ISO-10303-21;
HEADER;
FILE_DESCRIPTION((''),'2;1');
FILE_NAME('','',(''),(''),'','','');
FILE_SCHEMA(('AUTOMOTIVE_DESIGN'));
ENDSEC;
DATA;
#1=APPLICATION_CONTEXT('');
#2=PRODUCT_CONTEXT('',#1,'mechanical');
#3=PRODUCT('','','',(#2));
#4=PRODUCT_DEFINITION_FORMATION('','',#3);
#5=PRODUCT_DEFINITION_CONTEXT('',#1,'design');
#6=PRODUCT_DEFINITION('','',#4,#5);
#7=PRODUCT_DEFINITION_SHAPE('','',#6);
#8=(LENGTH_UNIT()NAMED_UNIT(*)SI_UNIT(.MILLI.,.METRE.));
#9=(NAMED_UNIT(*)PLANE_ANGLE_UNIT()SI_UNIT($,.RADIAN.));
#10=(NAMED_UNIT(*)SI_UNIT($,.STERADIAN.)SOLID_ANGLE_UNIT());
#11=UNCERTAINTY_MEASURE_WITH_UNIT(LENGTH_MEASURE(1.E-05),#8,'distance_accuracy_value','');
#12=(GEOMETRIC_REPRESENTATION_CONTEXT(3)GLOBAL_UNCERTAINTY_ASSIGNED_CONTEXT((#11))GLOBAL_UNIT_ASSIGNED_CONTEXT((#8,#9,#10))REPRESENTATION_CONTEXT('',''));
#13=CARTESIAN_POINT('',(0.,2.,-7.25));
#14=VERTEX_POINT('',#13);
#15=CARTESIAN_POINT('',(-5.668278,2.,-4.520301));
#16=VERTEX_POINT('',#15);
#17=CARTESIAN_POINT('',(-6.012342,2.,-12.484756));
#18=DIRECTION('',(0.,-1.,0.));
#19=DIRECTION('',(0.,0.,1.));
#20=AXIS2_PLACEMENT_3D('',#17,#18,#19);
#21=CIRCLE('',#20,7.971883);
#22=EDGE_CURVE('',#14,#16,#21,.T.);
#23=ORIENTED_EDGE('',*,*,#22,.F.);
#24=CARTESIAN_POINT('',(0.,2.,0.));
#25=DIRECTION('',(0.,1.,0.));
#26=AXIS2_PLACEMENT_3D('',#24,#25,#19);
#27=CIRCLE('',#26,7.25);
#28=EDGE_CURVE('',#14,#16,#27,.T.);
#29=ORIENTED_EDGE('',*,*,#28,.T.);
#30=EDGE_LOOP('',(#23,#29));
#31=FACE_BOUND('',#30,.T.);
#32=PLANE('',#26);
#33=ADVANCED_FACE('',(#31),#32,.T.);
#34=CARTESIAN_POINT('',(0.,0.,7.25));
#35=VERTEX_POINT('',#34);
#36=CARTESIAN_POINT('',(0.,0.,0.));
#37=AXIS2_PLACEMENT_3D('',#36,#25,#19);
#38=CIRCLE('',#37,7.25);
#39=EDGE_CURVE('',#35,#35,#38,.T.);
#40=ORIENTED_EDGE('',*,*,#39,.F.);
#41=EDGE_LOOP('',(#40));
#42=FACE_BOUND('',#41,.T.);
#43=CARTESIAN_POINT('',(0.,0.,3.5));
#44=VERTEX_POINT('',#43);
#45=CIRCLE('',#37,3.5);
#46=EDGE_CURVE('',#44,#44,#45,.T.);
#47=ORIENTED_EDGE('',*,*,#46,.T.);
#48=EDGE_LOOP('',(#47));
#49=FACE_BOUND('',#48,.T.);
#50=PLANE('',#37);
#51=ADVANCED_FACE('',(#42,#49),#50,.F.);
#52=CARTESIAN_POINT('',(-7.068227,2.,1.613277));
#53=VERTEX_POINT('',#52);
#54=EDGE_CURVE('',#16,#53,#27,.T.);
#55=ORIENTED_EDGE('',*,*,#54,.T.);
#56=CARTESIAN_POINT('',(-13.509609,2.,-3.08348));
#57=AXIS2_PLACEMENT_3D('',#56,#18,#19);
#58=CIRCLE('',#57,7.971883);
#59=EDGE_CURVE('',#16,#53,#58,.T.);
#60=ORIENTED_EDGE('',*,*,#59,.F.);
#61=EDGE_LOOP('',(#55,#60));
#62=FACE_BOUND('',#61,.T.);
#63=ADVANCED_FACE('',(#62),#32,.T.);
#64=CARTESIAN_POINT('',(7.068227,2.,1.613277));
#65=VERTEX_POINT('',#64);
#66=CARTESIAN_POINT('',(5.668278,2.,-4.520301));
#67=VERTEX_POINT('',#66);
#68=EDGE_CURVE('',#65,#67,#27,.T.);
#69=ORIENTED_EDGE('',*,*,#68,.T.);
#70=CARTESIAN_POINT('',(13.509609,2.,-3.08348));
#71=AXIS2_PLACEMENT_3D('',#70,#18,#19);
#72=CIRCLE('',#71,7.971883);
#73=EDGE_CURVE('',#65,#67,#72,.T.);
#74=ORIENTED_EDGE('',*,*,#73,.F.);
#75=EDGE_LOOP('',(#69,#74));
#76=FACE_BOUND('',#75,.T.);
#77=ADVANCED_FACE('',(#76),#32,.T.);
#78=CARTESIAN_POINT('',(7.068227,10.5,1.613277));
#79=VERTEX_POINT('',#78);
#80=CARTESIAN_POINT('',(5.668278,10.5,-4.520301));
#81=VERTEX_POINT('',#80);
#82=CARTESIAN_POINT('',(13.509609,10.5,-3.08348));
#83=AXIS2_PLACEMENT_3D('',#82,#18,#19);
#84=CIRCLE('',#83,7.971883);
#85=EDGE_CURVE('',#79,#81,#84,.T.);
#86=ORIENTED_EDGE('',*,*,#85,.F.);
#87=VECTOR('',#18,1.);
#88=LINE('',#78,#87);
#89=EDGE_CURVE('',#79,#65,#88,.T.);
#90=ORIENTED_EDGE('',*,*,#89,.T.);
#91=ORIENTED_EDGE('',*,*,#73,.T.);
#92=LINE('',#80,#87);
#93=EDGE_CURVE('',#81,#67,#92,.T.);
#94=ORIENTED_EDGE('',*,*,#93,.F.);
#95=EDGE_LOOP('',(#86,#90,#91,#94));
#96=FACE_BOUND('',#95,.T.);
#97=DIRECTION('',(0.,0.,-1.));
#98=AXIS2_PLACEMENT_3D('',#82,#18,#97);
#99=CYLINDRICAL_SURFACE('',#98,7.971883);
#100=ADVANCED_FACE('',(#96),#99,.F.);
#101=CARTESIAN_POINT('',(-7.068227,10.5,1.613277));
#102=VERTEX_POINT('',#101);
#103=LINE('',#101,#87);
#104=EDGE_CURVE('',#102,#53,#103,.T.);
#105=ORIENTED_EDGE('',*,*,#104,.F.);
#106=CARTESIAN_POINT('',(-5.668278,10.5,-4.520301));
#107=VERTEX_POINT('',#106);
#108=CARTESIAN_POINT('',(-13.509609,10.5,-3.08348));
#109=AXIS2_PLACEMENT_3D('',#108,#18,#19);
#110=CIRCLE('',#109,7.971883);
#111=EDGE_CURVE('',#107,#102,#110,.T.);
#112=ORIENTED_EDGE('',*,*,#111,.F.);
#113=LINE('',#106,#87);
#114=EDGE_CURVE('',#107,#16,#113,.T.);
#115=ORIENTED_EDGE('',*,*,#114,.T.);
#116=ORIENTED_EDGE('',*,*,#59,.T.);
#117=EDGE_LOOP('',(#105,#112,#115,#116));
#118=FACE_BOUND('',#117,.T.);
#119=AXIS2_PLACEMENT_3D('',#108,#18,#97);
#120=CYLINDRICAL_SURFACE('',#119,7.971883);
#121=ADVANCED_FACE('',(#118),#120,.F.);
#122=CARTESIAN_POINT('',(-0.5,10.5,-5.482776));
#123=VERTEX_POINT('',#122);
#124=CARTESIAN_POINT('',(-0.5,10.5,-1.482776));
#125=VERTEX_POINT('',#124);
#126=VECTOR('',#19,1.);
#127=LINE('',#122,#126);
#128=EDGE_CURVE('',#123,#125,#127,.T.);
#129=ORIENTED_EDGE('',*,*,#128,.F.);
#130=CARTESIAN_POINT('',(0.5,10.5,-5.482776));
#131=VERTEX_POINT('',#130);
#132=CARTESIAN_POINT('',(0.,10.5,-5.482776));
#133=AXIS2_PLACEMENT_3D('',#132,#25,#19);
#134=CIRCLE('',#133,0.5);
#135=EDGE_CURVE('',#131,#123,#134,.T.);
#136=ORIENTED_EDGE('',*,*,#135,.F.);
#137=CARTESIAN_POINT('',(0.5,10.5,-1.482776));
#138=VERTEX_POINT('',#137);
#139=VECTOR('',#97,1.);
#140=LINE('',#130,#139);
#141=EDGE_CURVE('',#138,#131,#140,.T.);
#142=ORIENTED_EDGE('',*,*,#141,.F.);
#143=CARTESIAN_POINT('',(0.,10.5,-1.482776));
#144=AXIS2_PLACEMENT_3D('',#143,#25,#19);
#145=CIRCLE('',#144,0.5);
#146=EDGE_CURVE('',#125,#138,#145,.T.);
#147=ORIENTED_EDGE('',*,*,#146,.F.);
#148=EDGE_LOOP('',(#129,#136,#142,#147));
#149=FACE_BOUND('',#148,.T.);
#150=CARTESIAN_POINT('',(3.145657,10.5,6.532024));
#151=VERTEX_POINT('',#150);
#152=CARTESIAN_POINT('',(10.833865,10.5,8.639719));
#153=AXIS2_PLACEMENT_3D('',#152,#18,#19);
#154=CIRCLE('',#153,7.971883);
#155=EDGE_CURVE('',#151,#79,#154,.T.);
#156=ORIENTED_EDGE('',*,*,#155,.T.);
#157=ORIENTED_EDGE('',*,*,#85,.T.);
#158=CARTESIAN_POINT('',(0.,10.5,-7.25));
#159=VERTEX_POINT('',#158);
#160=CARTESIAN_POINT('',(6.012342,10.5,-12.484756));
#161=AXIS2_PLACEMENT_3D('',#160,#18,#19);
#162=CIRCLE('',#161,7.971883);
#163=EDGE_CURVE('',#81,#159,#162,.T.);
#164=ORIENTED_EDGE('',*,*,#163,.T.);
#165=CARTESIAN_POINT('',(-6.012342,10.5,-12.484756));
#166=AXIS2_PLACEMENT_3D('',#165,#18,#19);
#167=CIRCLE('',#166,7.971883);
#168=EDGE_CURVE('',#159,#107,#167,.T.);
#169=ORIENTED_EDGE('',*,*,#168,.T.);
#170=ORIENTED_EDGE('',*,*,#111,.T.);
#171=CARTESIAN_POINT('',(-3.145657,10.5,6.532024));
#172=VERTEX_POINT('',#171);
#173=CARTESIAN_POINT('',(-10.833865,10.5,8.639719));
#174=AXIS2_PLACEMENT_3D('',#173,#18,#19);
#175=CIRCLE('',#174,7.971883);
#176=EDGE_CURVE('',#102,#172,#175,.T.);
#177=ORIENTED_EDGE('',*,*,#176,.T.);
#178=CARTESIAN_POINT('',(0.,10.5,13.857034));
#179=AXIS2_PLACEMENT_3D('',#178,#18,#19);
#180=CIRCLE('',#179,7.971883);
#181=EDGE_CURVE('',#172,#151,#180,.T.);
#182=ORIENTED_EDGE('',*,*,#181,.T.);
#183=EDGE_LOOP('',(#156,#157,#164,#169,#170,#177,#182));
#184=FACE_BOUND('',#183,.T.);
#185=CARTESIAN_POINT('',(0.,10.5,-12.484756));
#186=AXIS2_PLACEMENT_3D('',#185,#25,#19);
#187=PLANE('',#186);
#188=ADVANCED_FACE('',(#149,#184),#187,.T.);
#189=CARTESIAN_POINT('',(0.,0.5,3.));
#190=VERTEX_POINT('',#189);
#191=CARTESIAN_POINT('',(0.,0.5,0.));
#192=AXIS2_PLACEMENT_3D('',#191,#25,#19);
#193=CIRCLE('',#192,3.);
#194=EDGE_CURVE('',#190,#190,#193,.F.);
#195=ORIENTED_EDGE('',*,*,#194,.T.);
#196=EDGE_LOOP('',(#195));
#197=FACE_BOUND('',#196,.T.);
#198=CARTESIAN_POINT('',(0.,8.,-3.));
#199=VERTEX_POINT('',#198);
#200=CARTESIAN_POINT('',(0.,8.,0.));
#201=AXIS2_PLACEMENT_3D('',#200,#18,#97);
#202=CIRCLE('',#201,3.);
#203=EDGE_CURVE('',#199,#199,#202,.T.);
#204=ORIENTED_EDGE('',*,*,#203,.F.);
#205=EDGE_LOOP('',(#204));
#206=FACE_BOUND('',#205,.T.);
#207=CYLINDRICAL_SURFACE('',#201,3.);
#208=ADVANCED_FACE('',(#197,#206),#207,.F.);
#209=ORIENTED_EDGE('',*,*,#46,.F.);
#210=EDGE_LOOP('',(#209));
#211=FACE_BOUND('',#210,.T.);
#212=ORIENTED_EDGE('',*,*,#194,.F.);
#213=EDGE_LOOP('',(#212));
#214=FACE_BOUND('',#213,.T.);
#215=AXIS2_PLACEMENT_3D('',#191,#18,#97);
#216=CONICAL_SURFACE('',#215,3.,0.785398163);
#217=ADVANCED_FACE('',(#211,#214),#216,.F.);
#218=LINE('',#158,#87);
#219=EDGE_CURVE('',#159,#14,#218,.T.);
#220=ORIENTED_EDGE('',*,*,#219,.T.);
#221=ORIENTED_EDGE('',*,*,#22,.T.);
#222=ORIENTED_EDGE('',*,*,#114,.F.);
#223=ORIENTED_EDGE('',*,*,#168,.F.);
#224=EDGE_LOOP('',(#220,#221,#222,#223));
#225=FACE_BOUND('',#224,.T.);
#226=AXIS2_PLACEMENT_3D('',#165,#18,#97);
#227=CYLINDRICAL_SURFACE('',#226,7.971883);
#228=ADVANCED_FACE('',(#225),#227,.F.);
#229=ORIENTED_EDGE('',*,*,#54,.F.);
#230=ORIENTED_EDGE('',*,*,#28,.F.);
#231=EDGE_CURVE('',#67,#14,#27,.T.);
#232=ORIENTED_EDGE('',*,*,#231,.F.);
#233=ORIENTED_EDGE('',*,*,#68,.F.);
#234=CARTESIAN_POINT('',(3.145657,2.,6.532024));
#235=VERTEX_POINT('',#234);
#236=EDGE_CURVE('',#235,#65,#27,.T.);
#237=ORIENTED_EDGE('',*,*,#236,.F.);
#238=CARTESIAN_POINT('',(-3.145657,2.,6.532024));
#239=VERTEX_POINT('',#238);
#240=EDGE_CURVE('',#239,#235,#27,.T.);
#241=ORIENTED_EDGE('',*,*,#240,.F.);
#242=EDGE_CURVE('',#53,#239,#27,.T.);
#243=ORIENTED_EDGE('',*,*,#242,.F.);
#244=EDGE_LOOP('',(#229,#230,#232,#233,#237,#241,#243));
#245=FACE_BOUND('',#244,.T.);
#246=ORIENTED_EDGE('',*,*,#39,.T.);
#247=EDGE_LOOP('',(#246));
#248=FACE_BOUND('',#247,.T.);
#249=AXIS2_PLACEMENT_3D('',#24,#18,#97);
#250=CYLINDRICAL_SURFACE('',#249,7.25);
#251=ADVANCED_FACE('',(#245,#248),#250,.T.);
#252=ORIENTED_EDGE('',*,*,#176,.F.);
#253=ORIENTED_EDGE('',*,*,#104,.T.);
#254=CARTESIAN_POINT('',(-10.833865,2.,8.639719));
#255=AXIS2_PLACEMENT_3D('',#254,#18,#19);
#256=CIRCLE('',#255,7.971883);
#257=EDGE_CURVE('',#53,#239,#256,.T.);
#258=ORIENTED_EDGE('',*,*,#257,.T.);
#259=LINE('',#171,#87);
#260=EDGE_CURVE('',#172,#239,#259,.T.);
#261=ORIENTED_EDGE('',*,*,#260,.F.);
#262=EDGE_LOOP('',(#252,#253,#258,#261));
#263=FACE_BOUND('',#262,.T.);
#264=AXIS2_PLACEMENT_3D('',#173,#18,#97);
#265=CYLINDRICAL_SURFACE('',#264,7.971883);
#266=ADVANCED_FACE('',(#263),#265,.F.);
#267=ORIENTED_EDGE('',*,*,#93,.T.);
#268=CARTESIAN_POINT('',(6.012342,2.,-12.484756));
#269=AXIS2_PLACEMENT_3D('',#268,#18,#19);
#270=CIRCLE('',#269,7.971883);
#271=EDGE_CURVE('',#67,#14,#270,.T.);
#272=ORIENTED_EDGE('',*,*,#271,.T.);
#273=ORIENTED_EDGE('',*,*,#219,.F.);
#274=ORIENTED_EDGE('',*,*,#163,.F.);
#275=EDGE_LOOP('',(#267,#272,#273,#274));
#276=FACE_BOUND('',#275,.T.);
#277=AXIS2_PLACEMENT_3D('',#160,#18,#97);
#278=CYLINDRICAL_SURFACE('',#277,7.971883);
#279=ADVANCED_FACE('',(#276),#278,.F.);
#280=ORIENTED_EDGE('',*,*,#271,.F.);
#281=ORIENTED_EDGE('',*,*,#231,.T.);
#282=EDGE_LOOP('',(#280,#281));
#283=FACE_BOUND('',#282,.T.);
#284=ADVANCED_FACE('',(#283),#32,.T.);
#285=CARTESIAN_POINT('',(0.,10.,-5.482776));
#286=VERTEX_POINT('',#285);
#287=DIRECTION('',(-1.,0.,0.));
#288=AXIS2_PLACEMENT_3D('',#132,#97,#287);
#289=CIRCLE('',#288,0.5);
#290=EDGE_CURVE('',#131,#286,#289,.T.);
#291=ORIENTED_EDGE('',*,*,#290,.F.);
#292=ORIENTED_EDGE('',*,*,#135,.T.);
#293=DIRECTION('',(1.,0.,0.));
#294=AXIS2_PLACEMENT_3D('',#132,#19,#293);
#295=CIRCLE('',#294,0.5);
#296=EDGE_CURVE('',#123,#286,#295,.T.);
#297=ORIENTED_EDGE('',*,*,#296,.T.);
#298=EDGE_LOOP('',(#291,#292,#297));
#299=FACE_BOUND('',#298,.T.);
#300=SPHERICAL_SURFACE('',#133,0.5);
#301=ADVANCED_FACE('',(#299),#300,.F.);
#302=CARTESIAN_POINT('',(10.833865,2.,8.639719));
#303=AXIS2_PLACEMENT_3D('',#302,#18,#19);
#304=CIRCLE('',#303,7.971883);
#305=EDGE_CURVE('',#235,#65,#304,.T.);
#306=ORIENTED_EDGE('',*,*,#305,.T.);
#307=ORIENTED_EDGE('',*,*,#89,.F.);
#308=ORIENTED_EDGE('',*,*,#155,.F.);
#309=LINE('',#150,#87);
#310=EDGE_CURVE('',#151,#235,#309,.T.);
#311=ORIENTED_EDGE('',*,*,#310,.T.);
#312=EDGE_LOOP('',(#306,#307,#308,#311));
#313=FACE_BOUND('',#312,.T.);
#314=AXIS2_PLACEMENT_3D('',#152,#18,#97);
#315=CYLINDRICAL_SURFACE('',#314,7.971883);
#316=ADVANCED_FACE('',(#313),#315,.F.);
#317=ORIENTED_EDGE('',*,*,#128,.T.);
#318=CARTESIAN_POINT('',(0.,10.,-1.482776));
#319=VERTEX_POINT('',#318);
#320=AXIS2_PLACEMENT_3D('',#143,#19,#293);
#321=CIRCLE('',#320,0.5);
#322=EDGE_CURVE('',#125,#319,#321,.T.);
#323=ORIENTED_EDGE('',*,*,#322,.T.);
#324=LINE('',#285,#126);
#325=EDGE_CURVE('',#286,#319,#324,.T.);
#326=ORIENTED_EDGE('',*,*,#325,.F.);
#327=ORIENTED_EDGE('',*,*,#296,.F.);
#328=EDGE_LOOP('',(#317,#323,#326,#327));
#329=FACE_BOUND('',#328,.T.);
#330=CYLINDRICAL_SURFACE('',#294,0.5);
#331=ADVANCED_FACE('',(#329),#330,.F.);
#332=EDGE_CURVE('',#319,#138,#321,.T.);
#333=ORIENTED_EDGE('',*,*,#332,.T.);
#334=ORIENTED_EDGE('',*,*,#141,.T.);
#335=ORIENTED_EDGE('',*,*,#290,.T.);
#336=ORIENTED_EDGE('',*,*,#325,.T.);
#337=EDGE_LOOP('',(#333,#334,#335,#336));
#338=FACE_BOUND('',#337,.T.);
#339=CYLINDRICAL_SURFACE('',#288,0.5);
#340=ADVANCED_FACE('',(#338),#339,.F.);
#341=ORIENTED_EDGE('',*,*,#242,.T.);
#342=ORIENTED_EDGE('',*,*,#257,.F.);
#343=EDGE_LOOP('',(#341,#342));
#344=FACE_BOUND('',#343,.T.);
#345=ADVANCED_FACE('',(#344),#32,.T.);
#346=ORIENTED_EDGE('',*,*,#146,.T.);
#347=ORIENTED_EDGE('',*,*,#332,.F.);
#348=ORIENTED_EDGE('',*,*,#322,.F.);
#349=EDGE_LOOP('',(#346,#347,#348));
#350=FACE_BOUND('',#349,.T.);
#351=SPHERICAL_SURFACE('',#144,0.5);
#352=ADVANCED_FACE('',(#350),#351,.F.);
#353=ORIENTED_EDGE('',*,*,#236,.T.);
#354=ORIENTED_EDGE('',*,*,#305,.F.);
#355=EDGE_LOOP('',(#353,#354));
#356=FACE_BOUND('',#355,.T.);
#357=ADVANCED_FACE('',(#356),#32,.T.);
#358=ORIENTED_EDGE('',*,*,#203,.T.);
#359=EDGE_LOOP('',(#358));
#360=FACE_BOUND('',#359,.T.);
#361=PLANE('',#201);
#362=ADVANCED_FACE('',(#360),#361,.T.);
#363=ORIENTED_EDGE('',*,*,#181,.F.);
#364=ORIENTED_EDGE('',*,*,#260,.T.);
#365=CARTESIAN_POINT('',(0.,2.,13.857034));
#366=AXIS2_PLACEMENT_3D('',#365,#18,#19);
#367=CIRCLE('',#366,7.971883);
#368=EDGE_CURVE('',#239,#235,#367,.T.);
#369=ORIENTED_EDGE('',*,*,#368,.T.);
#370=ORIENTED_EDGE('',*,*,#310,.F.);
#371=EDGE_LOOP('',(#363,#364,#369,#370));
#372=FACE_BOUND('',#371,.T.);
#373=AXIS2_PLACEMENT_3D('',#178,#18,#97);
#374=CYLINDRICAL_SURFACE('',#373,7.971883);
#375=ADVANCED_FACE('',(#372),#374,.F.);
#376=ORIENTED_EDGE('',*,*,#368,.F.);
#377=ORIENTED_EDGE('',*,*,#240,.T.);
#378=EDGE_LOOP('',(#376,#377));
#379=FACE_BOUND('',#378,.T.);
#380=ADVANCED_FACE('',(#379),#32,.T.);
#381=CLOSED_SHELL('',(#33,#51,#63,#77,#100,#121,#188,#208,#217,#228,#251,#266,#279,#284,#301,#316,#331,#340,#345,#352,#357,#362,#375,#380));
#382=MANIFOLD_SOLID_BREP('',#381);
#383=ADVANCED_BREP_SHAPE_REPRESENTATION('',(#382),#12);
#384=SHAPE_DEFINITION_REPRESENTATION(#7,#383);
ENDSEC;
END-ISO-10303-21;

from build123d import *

# Parameters (mm, degrees)
SKETCH1_R           = 7.25
BOSS_EXTRUDE1_DEPTH = 2
BOSS_EXTRUDE2_DEPTH = 8.5
INDICATOR_DEPTH     = 0.5
FILLET1_R           = 0.5
SKETCH4_R           = 3
CUT_EXTRUDE2_DEPTH  = 8
CHAMFER1_SIZE       = 0.5


with BuildPart() as part:
    # Sketch1 → Boss-Extrude1 (new body)
    with BuildSketch(Plane(origin=(0, 0, 0), x_dir=(1, 0, 0), z_dir=(0, 1, 0))):
        with Locations(Location((0, 0, 0), (0, 0, 270))):
            Circle(SKETCH1_R)
    extrude(amount=BOSS_EXTRUDE1_DEPTH)

    # Sketch2 → Boss-Extrude2 (add)
    with BuildSketch(Plane(origin=(0, 2, 0), x_dir=(1, 0, 0), z_dir=(0, 1, 0))):
        with BuildLine():
            ThreePointArc((0, 7.25), (2.553471118, 5.302337412), (5.668278248, 4.520301063))
            ThreePointArc((5.668278248, 4.520301063), (5.737597521, 1.309569193), (7.068227363, -1.613276771))
            ThreePointArc((7.068227363, -1.613276771), (4.601195965, -3.669331339), (3.145657109, -6.532024292))
            ThreePointArc((3.145657109, -6.532024292), (0, -5.885150532), (-3.145657109, -6.532024292))
            ThreePointArc((-3.145657109, -6.532024292), (-4.601195965, -3.669331339), (-7.068227363, -1.613276771))
            ThreePointArc((-7.068227363, -1.613276771), (-5.737597521, 1.309569193), (-5.668278248, 4.520301063))
            ThreePointArc((-5.668278248, 4.520301063), (-2.553471118, 5.302337412), (0, 7.25))
        make_face()
    extrude(amount=BOSS_EXTRUDE2_DEPTH)

    # Sketch3 → Indicator (cut)
    with BuildSketch(Plane(origin=(0, 10.5, 0), x_dir=(1, 0, 0), z_dir=(0, 1, 0))):
        with BuildLine():
            Line((0.5, 5.482775584), (0.5, 1.482775584))
            ThreePointArc((0.5, 1.482775584), (0, 0.982775584), (-0.5, 1.482775584))
            Line((-0.5, 1.482775584), (-0.5, 5.482775584))
            ThreePointArc((-0.5, 5.482775584), (0, 5.982775584), (0.5, 5.482775584))
        make_face()
    extrude(amount=-INDICATOR_DEPTH, mode=Mode.SUBTRACT)

    # Fillet1
    fillet1_edges = [part.edges().sort_by_distance(p)[0] for p in [
        (0.5, 10, -3.482775584),
        (0, 10, -0.982775584),
        (-0.5, 10, -3.482775584),
        (0, 10, -5.982775584),
    ]]
    fillet(fillet1_edges, radius=FILLET1_R - 0.0001)  # a hair under: the kernel refuses the full size

    # Sketch4 → Cut-Extrude2 (cut)
    with BuildSketch(Plane(origin=(0, 0, 0), x_dir=(-1, 0, 0), z_dir=(0, -1, 0))):
        with Locations(Location((0, 0, 0), (0, 0, 90))):
            Circle(SKETCH4_R)
    extrude(amount=-CUT_EXTRUDE2_DEPTH, mode=Mode.SUBTRACT)

    # Chamfer1
    chamfer1_edges = [part.edges().sort_by_distance(p)[0] for p in [
        (0, 0, 3),
    ]]
    chamfer(chamfer1_edges, length=CHAMFER1_SIZE)


solid = part.part
